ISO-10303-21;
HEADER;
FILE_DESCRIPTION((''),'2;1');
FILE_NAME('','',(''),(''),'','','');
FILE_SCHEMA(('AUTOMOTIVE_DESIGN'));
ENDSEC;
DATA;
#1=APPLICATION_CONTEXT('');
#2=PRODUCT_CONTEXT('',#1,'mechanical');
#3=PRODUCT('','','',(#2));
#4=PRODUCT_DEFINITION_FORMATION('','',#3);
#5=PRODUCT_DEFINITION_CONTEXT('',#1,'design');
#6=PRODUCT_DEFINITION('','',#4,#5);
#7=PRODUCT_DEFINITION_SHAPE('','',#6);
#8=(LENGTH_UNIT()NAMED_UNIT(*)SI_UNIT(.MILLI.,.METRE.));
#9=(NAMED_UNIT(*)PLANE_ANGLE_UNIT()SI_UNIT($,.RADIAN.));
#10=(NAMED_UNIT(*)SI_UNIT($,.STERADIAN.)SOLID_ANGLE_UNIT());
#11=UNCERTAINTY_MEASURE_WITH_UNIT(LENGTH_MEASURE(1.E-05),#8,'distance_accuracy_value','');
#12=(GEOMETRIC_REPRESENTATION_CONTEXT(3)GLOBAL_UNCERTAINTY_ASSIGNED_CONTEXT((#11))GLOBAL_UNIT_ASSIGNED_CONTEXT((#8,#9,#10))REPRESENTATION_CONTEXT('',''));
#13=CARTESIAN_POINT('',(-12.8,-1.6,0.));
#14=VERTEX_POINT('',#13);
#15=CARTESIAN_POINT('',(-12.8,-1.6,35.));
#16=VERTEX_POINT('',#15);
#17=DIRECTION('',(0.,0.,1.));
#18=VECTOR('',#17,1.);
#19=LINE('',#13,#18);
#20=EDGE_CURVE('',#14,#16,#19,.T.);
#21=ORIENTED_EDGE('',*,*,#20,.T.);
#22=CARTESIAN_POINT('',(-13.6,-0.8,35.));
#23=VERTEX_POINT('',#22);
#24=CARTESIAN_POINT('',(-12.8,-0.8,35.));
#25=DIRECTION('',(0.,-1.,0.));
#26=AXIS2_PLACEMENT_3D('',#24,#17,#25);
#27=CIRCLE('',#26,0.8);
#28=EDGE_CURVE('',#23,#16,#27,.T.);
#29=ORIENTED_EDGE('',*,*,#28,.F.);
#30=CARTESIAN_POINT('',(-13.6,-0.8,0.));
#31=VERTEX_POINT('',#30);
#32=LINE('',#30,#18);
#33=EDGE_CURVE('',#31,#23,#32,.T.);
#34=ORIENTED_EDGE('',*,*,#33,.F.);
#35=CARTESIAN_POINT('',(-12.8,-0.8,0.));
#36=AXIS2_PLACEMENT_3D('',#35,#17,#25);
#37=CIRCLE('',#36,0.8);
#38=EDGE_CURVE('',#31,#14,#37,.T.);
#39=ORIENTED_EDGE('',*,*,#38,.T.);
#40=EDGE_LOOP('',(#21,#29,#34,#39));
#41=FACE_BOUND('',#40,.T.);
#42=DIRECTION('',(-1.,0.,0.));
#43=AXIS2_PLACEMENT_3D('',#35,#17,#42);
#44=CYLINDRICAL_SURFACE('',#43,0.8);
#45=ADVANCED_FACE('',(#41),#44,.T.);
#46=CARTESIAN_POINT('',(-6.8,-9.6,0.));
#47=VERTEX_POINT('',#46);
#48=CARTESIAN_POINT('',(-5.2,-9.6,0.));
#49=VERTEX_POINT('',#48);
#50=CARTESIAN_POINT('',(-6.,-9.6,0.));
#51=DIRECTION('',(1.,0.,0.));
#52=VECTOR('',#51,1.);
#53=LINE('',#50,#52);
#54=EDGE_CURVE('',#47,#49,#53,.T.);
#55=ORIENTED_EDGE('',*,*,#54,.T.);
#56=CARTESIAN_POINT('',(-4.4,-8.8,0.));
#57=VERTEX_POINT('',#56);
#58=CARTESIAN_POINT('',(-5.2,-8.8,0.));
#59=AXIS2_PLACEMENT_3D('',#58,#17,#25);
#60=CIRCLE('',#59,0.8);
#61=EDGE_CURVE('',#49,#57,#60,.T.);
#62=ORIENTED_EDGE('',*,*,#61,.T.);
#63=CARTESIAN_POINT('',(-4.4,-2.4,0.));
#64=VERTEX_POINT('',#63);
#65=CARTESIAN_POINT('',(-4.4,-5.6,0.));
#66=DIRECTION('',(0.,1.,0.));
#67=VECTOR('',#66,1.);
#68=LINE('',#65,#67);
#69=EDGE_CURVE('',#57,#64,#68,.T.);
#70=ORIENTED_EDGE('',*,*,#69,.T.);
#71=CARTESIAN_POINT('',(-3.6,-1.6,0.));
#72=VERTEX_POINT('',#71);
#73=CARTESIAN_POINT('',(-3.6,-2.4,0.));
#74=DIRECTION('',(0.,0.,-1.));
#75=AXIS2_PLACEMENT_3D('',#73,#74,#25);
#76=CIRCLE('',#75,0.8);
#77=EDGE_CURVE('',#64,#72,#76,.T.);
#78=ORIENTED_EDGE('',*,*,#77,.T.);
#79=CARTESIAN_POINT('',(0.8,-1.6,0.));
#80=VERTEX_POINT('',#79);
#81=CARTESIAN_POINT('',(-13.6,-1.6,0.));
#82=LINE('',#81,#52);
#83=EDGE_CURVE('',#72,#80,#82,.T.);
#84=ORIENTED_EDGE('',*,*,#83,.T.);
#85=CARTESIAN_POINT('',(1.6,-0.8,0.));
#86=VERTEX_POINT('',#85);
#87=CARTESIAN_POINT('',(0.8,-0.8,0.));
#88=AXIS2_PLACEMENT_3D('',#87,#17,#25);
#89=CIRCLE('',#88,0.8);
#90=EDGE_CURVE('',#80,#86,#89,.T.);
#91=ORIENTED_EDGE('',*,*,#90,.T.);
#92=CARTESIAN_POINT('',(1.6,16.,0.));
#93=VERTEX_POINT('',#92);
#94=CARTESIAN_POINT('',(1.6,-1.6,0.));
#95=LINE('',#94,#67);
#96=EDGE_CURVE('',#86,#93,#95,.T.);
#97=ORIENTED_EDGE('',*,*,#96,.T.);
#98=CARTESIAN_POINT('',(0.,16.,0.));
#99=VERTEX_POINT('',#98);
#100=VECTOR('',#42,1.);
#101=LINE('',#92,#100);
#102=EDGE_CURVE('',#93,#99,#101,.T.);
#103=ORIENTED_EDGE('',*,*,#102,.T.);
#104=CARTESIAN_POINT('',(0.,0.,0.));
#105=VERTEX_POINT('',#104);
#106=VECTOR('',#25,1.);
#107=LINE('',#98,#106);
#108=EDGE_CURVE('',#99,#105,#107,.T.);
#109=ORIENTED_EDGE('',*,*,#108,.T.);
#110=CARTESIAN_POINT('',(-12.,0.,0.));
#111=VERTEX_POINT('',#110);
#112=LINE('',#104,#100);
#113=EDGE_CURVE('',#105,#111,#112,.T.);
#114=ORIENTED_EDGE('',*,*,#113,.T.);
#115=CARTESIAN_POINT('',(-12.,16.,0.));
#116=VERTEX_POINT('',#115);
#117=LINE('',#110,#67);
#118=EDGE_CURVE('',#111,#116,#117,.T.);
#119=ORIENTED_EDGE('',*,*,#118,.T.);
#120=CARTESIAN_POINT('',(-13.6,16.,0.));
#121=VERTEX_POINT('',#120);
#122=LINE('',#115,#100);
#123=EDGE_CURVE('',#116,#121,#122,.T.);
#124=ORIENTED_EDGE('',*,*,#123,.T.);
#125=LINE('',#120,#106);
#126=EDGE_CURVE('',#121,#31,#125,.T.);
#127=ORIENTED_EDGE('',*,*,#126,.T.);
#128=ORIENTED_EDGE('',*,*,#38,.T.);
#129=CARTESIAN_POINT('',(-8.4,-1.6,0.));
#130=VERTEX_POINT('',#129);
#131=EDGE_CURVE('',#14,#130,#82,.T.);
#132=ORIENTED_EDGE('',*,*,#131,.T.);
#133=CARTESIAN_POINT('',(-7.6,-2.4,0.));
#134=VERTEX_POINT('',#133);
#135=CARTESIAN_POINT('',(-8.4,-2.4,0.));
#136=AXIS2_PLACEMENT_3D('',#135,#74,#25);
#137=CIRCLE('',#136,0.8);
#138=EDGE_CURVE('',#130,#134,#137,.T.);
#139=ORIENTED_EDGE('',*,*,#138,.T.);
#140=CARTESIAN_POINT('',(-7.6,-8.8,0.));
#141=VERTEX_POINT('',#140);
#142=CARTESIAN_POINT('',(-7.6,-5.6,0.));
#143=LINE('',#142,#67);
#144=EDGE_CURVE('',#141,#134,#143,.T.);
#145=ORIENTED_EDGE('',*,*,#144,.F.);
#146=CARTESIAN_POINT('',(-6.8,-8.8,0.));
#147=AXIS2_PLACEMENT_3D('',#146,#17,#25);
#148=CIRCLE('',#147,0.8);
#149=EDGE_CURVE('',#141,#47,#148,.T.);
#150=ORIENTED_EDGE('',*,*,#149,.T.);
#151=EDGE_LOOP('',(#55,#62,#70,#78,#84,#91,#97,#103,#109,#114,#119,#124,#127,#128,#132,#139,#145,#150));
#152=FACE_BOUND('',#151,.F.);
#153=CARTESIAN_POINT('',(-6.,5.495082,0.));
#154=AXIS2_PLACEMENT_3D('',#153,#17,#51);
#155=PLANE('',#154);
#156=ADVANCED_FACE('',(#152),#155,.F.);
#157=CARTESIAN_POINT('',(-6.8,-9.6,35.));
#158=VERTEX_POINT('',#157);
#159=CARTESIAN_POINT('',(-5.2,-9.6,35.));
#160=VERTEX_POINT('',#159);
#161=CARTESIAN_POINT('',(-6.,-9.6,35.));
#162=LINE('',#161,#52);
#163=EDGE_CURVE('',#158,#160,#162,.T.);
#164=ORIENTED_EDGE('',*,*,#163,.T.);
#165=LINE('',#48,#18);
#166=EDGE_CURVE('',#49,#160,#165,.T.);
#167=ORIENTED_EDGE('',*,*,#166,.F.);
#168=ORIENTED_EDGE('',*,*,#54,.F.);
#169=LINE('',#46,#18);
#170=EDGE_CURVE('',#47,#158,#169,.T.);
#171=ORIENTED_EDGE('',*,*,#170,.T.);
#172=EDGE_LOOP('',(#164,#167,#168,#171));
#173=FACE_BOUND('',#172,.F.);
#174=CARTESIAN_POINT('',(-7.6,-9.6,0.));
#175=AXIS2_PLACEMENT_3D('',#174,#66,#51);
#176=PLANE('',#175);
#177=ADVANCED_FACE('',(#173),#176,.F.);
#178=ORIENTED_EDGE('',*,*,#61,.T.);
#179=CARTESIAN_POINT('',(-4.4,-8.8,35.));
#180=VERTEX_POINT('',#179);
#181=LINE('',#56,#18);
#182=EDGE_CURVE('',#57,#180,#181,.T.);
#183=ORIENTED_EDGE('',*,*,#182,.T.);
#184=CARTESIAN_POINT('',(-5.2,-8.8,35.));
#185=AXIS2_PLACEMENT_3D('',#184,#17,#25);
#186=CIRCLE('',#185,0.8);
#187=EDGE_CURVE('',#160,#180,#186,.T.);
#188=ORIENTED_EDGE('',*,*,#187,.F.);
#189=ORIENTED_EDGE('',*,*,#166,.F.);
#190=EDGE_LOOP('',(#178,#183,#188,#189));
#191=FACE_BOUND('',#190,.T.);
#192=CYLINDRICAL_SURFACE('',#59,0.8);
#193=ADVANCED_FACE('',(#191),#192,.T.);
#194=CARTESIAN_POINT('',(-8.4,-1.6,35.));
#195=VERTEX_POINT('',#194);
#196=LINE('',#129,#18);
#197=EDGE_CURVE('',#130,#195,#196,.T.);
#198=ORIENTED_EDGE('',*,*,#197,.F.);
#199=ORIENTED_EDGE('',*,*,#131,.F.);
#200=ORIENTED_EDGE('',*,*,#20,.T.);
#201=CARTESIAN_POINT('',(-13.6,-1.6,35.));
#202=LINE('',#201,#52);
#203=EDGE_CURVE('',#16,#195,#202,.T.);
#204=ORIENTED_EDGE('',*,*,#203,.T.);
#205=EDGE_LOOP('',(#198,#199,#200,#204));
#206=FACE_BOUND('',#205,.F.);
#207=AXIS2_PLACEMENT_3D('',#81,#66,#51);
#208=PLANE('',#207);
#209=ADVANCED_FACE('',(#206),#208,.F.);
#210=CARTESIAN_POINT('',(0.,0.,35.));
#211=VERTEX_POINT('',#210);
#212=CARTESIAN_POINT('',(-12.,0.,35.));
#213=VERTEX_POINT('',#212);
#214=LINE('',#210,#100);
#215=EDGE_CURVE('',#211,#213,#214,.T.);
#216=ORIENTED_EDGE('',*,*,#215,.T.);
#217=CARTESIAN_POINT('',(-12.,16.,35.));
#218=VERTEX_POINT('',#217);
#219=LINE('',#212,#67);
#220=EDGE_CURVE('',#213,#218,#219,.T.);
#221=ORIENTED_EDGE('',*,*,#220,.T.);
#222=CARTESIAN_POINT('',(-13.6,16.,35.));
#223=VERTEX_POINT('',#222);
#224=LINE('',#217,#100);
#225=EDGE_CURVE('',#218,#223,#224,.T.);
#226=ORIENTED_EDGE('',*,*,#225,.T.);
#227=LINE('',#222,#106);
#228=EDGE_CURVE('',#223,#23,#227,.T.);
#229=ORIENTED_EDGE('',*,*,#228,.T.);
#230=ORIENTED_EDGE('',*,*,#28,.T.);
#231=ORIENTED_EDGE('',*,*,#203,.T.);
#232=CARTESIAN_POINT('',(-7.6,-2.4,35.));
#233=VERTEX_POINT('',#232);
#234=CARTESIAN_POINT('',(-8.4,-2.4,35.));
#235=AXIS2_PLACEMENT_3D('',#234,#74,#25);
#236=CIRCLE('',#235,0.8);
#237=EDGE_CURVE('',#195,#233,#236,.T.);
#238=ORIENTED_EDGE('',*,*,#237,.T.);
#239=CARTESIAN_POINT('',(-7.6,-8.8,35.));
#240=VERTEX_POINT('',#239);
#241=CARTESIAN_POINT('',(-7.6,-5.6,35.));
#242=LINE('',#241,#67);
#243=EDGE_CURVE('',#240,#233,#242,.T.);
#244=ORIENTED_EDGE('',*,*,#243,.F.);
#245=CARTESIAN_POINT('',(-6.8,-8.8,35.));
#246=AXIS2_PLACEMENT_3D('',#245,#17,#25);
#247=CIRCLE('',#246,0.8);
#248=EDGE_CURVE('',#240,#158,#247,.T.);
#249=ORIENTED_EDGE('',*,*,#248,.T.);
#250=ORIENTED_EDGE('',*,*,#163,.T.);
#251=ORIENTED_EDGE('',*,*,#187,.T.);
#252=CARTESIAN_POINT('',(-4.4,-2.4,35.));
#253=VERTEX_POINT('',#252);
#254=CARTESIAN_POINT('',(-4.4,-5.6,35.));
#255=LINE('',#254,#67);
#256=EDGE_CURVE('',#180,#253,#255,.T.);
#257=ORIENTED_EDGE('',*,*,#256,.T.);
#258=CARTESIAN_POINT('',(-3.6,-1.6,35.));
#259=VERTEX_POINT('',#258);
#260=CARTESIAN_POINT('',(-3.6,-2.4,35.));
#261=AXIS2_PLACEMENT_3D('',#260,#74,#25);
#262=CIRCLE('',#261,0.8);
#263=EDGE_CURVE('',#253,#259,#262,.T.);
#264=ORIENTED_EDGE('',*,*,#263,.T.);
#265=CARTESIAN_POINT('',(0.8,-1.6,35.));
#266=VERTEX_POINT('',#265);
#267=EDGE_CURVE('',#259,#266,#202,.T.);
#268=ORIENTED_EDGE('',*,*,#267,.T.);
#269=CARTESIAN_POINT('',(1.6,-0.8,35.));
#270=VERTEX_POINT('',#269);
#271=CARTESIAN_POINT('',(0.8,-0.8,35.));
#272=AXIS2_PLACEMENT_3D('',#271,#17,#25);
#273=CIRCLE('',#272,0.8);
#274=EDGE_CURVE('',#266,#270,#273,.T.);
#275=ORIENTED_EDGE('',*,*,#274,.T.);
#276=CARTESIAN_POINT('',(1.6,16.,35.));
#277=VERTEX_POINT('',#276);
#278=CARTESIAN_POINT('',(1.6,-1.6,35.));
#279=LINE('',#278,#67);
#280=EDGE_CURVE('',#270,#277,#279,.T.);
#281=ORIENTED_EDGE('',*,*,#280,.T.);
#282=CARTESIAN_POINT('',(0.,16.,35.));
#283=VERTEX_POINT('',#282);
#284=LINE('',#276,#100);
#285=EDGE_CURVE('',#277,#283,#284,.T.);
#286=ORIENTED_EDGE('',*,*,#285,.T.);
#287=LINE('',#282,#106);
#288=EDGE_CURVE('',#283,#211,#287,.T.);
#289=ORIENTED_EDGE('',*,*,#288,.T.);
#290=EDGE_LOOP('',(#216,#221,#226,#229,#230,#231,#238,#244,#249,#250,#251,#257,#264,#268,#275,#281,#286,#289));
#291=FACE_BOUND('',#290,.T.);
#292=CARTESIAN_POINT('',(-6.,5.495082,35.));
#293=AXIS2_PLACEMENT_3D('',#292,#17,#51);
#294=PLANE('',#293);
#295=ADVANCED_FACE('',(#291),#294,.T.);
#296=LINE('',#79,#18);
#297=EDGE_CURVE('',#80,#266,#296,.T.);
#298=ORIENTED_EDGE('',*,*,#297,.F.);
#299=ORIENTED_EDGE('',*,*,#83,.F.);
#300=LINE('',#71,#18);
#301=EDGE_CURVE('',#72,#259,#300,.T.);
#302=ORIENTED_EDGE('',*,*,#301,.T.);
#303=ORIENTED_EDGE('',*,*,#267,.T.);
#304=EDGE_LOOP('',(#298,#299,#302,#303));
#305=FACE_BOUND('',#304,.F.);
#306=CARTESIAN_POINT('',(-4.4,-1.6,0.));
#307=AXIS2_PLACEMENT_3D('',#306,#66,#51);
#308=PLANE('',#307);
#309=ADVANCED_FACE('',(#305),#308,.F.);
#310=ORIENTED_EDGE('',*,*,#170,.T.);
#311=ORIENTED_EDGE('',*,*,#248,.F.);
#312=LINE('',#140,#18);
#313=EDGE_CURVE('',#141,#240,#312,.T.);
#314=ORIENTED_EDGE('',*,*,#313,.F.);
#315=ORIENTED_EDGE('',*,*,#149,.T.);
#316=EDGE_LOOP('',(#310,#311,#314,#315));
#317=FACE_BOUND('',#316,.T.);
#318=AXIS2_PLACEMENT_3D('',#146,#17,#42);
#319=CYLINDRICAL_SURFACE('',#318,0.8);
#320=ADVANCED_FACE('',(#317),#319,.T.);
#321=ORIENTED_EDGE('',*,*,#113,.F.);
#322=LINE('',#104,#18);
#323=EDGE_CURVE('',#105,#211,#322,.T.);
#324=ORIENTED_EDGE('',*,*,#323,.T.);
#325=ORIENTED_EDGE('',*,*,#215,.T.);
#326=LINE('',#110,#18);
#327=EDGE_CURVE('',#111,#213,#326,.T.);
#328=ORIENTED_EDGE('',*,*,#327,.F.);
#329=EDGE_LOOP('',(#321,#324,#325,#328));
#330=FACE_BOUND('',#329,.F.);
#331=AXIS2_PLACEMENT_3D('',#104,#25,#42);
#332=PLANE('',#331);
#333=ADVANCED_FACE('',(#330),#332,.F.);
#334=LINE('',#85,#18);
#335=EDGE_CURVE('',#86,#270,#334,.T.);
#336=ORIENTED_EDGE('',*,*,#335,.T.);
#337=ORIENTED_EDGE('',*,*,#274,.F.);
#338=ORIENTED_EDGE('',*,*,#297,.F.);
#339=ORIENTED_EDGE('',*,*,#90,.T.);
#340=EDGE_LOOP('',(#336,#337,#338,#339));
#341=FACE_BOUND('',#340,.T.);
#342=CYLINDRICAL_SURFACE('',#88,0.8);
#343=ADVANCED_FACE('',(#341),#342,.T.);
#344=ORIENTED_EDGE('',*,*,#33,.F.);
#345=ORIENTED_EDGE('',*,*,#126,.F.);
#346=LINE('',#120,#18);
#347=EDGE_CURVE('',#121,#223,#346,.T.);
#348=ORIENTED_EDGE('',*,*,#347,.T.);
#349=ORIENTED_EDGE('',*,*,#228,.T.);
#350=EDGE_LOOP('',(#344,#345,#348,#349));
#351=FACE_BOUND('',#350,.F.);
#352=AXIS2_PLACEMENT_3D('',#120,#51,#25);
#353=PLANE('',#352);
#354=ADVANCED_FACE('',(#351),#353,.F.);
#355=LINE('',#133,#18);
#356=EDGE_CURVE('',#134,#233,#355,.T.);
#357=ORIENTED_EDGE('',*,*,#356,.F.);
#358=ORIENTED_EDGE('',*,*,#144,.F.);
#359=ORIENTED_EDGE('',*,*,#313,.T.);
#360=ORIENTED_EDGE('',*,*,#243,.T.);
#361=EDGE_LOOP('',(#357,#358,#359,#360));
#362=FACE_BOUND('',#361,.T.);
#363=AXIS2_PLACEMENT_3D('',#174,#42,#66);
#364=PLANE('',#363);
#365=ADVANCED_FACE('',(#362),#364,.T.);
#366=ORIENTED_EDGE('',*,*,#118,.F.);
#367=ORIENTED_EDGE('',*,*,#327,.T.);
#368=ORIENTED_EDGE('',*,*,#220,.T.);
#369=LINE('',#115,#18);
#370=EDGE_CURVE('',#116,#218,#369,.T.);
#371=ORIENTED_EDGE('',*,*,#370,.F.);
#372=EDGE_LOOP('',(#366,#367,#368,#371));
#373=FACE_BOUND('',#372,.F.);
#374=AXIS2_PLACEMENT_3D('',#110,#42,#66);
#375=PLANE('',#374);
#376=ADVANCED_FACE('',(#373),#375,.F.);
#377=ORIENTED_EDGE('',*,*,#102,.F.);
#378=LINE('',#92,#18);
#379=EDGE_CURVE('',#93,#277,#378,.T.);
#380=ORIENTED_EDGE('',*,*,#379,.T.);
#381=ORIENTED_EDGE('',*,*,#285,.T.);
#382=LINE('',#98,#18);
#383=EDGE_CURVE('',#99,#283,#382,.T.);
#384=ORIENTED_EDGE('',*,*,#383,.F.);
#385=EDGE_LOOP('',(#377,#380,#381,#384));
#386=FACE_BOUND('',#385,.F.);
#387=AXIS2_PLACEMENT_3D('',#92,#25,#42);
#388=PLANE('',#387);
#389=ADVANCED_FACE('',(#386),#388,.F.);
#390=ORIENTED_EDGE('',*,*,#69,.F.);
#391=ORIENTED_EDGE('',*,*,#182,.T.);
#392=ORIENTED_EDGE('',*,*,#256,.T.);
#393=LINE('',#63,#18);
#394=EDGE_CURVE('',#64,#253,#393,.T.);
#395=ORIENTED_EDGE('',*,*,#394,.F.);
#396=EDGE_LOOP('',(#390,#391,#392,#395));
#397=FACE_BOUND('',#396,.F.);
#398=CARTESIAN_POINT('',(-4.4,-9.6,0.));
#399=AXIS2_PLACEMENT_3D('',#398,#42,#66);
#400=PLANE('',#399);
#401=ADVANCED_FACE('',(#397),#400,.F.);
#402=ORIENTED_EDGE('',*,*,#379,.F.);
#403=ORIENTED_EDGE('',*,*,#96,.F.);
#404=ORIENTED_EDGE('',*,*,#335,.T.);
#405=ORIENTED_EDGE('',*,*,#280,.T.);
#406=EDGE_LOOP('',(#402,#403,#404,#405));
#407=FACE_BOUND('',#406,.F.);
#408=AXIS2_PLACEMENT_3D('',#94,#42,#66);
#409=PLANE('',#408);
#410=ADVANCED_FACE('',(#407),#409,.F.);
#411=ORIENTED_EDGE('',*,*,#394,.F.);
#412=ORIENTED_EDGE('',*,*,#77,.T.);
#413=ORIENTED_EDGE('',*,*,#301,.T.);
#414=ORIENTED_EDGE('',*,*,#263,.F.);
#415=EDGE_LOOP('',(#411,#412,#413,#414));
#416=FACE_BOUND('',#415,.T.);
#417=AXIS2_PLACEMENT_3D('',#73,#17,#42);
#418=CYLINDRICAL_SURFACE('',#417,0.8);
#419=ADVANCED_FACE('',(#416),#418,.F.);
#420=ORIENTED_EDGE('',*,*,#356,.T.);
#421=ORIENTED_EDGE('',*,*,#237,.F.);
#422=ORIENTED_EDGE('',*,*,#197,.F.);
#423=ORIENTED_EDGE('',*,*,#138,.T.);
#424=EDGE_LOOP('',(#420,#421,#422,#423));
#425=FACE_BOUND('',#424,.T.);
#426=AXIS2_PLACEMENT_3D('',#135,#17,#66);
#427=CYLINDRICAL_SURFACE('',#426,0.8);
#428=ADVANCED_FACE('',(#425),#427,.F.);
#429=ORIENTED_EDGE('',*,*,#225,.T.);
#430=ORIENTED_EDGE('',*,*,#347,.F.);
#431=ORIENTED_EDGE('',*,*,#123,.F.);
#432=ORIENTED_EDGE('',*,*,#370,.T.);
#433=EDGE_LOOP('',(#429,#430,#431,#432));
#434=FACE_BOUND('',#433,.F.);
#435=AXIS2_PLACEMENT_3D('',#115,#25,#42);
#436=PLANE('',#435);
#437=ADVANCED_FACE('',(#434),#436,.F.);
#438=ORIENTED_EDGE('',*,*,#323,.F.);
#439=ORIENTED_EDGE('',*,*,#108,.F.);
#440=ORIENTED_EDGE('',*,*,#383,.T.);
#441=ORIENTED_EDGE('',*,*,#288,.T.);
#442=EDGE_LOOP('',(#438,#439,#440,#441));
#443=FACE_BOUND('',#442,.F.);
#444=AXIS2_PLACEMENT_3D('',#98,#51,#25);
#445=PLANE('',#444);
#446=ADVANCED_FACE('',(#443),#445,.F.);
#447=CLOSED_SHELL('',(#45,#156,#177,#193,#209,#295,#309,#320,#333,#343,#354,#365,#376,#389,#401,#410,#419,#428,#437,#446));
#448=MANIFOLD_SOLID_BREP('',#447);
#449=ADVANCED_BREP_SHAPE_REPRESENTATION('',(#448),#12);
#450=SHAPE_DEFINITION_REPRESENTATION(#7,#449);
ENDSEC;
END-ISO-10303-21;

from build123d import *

# Parameters (mm, degrees)
F0_W     = 3.2
F0_H     = 8
F1_DEPTH = 35
F2_R     = 0.8


# Not quite as in the source:
# - a feature names something its author has since deleted; it is built from what else it names


with BuildPart() as f1:
    # F0 (on Top) → F1 (new body)
    with BuildSketch(Plane.XY):
        Polygon((0, 16), (0, 0), (-12, 0), (-12, 16), (-13.6, 16), (-13.6, -1.6), (-7.6, -1.6), (-4.4, -1.6), (1.6, -1.6), (1.6, 16), align=None)
        with Locations((-6, -5.6)):
            Rectangle(F0_W, F0_H)
    extrude(amount=F1_DEPTH)

    # F2
    f2_edges = [f1.edges().sort_by_distance(p)[0] for p in [
        (1.6, -1.6, 17.5),
        (-13.6, -1.6, 17.5),
        (-7.6, -1.6, 17.5),
        (-4.4, -1.6, 17.5),
        (-7.6, -9.6, 17.5),
        (-4.4, -9.6, 17.5),
    ]]
    fillet(f2_edges, radius=F2_R)


solid = f1.part
